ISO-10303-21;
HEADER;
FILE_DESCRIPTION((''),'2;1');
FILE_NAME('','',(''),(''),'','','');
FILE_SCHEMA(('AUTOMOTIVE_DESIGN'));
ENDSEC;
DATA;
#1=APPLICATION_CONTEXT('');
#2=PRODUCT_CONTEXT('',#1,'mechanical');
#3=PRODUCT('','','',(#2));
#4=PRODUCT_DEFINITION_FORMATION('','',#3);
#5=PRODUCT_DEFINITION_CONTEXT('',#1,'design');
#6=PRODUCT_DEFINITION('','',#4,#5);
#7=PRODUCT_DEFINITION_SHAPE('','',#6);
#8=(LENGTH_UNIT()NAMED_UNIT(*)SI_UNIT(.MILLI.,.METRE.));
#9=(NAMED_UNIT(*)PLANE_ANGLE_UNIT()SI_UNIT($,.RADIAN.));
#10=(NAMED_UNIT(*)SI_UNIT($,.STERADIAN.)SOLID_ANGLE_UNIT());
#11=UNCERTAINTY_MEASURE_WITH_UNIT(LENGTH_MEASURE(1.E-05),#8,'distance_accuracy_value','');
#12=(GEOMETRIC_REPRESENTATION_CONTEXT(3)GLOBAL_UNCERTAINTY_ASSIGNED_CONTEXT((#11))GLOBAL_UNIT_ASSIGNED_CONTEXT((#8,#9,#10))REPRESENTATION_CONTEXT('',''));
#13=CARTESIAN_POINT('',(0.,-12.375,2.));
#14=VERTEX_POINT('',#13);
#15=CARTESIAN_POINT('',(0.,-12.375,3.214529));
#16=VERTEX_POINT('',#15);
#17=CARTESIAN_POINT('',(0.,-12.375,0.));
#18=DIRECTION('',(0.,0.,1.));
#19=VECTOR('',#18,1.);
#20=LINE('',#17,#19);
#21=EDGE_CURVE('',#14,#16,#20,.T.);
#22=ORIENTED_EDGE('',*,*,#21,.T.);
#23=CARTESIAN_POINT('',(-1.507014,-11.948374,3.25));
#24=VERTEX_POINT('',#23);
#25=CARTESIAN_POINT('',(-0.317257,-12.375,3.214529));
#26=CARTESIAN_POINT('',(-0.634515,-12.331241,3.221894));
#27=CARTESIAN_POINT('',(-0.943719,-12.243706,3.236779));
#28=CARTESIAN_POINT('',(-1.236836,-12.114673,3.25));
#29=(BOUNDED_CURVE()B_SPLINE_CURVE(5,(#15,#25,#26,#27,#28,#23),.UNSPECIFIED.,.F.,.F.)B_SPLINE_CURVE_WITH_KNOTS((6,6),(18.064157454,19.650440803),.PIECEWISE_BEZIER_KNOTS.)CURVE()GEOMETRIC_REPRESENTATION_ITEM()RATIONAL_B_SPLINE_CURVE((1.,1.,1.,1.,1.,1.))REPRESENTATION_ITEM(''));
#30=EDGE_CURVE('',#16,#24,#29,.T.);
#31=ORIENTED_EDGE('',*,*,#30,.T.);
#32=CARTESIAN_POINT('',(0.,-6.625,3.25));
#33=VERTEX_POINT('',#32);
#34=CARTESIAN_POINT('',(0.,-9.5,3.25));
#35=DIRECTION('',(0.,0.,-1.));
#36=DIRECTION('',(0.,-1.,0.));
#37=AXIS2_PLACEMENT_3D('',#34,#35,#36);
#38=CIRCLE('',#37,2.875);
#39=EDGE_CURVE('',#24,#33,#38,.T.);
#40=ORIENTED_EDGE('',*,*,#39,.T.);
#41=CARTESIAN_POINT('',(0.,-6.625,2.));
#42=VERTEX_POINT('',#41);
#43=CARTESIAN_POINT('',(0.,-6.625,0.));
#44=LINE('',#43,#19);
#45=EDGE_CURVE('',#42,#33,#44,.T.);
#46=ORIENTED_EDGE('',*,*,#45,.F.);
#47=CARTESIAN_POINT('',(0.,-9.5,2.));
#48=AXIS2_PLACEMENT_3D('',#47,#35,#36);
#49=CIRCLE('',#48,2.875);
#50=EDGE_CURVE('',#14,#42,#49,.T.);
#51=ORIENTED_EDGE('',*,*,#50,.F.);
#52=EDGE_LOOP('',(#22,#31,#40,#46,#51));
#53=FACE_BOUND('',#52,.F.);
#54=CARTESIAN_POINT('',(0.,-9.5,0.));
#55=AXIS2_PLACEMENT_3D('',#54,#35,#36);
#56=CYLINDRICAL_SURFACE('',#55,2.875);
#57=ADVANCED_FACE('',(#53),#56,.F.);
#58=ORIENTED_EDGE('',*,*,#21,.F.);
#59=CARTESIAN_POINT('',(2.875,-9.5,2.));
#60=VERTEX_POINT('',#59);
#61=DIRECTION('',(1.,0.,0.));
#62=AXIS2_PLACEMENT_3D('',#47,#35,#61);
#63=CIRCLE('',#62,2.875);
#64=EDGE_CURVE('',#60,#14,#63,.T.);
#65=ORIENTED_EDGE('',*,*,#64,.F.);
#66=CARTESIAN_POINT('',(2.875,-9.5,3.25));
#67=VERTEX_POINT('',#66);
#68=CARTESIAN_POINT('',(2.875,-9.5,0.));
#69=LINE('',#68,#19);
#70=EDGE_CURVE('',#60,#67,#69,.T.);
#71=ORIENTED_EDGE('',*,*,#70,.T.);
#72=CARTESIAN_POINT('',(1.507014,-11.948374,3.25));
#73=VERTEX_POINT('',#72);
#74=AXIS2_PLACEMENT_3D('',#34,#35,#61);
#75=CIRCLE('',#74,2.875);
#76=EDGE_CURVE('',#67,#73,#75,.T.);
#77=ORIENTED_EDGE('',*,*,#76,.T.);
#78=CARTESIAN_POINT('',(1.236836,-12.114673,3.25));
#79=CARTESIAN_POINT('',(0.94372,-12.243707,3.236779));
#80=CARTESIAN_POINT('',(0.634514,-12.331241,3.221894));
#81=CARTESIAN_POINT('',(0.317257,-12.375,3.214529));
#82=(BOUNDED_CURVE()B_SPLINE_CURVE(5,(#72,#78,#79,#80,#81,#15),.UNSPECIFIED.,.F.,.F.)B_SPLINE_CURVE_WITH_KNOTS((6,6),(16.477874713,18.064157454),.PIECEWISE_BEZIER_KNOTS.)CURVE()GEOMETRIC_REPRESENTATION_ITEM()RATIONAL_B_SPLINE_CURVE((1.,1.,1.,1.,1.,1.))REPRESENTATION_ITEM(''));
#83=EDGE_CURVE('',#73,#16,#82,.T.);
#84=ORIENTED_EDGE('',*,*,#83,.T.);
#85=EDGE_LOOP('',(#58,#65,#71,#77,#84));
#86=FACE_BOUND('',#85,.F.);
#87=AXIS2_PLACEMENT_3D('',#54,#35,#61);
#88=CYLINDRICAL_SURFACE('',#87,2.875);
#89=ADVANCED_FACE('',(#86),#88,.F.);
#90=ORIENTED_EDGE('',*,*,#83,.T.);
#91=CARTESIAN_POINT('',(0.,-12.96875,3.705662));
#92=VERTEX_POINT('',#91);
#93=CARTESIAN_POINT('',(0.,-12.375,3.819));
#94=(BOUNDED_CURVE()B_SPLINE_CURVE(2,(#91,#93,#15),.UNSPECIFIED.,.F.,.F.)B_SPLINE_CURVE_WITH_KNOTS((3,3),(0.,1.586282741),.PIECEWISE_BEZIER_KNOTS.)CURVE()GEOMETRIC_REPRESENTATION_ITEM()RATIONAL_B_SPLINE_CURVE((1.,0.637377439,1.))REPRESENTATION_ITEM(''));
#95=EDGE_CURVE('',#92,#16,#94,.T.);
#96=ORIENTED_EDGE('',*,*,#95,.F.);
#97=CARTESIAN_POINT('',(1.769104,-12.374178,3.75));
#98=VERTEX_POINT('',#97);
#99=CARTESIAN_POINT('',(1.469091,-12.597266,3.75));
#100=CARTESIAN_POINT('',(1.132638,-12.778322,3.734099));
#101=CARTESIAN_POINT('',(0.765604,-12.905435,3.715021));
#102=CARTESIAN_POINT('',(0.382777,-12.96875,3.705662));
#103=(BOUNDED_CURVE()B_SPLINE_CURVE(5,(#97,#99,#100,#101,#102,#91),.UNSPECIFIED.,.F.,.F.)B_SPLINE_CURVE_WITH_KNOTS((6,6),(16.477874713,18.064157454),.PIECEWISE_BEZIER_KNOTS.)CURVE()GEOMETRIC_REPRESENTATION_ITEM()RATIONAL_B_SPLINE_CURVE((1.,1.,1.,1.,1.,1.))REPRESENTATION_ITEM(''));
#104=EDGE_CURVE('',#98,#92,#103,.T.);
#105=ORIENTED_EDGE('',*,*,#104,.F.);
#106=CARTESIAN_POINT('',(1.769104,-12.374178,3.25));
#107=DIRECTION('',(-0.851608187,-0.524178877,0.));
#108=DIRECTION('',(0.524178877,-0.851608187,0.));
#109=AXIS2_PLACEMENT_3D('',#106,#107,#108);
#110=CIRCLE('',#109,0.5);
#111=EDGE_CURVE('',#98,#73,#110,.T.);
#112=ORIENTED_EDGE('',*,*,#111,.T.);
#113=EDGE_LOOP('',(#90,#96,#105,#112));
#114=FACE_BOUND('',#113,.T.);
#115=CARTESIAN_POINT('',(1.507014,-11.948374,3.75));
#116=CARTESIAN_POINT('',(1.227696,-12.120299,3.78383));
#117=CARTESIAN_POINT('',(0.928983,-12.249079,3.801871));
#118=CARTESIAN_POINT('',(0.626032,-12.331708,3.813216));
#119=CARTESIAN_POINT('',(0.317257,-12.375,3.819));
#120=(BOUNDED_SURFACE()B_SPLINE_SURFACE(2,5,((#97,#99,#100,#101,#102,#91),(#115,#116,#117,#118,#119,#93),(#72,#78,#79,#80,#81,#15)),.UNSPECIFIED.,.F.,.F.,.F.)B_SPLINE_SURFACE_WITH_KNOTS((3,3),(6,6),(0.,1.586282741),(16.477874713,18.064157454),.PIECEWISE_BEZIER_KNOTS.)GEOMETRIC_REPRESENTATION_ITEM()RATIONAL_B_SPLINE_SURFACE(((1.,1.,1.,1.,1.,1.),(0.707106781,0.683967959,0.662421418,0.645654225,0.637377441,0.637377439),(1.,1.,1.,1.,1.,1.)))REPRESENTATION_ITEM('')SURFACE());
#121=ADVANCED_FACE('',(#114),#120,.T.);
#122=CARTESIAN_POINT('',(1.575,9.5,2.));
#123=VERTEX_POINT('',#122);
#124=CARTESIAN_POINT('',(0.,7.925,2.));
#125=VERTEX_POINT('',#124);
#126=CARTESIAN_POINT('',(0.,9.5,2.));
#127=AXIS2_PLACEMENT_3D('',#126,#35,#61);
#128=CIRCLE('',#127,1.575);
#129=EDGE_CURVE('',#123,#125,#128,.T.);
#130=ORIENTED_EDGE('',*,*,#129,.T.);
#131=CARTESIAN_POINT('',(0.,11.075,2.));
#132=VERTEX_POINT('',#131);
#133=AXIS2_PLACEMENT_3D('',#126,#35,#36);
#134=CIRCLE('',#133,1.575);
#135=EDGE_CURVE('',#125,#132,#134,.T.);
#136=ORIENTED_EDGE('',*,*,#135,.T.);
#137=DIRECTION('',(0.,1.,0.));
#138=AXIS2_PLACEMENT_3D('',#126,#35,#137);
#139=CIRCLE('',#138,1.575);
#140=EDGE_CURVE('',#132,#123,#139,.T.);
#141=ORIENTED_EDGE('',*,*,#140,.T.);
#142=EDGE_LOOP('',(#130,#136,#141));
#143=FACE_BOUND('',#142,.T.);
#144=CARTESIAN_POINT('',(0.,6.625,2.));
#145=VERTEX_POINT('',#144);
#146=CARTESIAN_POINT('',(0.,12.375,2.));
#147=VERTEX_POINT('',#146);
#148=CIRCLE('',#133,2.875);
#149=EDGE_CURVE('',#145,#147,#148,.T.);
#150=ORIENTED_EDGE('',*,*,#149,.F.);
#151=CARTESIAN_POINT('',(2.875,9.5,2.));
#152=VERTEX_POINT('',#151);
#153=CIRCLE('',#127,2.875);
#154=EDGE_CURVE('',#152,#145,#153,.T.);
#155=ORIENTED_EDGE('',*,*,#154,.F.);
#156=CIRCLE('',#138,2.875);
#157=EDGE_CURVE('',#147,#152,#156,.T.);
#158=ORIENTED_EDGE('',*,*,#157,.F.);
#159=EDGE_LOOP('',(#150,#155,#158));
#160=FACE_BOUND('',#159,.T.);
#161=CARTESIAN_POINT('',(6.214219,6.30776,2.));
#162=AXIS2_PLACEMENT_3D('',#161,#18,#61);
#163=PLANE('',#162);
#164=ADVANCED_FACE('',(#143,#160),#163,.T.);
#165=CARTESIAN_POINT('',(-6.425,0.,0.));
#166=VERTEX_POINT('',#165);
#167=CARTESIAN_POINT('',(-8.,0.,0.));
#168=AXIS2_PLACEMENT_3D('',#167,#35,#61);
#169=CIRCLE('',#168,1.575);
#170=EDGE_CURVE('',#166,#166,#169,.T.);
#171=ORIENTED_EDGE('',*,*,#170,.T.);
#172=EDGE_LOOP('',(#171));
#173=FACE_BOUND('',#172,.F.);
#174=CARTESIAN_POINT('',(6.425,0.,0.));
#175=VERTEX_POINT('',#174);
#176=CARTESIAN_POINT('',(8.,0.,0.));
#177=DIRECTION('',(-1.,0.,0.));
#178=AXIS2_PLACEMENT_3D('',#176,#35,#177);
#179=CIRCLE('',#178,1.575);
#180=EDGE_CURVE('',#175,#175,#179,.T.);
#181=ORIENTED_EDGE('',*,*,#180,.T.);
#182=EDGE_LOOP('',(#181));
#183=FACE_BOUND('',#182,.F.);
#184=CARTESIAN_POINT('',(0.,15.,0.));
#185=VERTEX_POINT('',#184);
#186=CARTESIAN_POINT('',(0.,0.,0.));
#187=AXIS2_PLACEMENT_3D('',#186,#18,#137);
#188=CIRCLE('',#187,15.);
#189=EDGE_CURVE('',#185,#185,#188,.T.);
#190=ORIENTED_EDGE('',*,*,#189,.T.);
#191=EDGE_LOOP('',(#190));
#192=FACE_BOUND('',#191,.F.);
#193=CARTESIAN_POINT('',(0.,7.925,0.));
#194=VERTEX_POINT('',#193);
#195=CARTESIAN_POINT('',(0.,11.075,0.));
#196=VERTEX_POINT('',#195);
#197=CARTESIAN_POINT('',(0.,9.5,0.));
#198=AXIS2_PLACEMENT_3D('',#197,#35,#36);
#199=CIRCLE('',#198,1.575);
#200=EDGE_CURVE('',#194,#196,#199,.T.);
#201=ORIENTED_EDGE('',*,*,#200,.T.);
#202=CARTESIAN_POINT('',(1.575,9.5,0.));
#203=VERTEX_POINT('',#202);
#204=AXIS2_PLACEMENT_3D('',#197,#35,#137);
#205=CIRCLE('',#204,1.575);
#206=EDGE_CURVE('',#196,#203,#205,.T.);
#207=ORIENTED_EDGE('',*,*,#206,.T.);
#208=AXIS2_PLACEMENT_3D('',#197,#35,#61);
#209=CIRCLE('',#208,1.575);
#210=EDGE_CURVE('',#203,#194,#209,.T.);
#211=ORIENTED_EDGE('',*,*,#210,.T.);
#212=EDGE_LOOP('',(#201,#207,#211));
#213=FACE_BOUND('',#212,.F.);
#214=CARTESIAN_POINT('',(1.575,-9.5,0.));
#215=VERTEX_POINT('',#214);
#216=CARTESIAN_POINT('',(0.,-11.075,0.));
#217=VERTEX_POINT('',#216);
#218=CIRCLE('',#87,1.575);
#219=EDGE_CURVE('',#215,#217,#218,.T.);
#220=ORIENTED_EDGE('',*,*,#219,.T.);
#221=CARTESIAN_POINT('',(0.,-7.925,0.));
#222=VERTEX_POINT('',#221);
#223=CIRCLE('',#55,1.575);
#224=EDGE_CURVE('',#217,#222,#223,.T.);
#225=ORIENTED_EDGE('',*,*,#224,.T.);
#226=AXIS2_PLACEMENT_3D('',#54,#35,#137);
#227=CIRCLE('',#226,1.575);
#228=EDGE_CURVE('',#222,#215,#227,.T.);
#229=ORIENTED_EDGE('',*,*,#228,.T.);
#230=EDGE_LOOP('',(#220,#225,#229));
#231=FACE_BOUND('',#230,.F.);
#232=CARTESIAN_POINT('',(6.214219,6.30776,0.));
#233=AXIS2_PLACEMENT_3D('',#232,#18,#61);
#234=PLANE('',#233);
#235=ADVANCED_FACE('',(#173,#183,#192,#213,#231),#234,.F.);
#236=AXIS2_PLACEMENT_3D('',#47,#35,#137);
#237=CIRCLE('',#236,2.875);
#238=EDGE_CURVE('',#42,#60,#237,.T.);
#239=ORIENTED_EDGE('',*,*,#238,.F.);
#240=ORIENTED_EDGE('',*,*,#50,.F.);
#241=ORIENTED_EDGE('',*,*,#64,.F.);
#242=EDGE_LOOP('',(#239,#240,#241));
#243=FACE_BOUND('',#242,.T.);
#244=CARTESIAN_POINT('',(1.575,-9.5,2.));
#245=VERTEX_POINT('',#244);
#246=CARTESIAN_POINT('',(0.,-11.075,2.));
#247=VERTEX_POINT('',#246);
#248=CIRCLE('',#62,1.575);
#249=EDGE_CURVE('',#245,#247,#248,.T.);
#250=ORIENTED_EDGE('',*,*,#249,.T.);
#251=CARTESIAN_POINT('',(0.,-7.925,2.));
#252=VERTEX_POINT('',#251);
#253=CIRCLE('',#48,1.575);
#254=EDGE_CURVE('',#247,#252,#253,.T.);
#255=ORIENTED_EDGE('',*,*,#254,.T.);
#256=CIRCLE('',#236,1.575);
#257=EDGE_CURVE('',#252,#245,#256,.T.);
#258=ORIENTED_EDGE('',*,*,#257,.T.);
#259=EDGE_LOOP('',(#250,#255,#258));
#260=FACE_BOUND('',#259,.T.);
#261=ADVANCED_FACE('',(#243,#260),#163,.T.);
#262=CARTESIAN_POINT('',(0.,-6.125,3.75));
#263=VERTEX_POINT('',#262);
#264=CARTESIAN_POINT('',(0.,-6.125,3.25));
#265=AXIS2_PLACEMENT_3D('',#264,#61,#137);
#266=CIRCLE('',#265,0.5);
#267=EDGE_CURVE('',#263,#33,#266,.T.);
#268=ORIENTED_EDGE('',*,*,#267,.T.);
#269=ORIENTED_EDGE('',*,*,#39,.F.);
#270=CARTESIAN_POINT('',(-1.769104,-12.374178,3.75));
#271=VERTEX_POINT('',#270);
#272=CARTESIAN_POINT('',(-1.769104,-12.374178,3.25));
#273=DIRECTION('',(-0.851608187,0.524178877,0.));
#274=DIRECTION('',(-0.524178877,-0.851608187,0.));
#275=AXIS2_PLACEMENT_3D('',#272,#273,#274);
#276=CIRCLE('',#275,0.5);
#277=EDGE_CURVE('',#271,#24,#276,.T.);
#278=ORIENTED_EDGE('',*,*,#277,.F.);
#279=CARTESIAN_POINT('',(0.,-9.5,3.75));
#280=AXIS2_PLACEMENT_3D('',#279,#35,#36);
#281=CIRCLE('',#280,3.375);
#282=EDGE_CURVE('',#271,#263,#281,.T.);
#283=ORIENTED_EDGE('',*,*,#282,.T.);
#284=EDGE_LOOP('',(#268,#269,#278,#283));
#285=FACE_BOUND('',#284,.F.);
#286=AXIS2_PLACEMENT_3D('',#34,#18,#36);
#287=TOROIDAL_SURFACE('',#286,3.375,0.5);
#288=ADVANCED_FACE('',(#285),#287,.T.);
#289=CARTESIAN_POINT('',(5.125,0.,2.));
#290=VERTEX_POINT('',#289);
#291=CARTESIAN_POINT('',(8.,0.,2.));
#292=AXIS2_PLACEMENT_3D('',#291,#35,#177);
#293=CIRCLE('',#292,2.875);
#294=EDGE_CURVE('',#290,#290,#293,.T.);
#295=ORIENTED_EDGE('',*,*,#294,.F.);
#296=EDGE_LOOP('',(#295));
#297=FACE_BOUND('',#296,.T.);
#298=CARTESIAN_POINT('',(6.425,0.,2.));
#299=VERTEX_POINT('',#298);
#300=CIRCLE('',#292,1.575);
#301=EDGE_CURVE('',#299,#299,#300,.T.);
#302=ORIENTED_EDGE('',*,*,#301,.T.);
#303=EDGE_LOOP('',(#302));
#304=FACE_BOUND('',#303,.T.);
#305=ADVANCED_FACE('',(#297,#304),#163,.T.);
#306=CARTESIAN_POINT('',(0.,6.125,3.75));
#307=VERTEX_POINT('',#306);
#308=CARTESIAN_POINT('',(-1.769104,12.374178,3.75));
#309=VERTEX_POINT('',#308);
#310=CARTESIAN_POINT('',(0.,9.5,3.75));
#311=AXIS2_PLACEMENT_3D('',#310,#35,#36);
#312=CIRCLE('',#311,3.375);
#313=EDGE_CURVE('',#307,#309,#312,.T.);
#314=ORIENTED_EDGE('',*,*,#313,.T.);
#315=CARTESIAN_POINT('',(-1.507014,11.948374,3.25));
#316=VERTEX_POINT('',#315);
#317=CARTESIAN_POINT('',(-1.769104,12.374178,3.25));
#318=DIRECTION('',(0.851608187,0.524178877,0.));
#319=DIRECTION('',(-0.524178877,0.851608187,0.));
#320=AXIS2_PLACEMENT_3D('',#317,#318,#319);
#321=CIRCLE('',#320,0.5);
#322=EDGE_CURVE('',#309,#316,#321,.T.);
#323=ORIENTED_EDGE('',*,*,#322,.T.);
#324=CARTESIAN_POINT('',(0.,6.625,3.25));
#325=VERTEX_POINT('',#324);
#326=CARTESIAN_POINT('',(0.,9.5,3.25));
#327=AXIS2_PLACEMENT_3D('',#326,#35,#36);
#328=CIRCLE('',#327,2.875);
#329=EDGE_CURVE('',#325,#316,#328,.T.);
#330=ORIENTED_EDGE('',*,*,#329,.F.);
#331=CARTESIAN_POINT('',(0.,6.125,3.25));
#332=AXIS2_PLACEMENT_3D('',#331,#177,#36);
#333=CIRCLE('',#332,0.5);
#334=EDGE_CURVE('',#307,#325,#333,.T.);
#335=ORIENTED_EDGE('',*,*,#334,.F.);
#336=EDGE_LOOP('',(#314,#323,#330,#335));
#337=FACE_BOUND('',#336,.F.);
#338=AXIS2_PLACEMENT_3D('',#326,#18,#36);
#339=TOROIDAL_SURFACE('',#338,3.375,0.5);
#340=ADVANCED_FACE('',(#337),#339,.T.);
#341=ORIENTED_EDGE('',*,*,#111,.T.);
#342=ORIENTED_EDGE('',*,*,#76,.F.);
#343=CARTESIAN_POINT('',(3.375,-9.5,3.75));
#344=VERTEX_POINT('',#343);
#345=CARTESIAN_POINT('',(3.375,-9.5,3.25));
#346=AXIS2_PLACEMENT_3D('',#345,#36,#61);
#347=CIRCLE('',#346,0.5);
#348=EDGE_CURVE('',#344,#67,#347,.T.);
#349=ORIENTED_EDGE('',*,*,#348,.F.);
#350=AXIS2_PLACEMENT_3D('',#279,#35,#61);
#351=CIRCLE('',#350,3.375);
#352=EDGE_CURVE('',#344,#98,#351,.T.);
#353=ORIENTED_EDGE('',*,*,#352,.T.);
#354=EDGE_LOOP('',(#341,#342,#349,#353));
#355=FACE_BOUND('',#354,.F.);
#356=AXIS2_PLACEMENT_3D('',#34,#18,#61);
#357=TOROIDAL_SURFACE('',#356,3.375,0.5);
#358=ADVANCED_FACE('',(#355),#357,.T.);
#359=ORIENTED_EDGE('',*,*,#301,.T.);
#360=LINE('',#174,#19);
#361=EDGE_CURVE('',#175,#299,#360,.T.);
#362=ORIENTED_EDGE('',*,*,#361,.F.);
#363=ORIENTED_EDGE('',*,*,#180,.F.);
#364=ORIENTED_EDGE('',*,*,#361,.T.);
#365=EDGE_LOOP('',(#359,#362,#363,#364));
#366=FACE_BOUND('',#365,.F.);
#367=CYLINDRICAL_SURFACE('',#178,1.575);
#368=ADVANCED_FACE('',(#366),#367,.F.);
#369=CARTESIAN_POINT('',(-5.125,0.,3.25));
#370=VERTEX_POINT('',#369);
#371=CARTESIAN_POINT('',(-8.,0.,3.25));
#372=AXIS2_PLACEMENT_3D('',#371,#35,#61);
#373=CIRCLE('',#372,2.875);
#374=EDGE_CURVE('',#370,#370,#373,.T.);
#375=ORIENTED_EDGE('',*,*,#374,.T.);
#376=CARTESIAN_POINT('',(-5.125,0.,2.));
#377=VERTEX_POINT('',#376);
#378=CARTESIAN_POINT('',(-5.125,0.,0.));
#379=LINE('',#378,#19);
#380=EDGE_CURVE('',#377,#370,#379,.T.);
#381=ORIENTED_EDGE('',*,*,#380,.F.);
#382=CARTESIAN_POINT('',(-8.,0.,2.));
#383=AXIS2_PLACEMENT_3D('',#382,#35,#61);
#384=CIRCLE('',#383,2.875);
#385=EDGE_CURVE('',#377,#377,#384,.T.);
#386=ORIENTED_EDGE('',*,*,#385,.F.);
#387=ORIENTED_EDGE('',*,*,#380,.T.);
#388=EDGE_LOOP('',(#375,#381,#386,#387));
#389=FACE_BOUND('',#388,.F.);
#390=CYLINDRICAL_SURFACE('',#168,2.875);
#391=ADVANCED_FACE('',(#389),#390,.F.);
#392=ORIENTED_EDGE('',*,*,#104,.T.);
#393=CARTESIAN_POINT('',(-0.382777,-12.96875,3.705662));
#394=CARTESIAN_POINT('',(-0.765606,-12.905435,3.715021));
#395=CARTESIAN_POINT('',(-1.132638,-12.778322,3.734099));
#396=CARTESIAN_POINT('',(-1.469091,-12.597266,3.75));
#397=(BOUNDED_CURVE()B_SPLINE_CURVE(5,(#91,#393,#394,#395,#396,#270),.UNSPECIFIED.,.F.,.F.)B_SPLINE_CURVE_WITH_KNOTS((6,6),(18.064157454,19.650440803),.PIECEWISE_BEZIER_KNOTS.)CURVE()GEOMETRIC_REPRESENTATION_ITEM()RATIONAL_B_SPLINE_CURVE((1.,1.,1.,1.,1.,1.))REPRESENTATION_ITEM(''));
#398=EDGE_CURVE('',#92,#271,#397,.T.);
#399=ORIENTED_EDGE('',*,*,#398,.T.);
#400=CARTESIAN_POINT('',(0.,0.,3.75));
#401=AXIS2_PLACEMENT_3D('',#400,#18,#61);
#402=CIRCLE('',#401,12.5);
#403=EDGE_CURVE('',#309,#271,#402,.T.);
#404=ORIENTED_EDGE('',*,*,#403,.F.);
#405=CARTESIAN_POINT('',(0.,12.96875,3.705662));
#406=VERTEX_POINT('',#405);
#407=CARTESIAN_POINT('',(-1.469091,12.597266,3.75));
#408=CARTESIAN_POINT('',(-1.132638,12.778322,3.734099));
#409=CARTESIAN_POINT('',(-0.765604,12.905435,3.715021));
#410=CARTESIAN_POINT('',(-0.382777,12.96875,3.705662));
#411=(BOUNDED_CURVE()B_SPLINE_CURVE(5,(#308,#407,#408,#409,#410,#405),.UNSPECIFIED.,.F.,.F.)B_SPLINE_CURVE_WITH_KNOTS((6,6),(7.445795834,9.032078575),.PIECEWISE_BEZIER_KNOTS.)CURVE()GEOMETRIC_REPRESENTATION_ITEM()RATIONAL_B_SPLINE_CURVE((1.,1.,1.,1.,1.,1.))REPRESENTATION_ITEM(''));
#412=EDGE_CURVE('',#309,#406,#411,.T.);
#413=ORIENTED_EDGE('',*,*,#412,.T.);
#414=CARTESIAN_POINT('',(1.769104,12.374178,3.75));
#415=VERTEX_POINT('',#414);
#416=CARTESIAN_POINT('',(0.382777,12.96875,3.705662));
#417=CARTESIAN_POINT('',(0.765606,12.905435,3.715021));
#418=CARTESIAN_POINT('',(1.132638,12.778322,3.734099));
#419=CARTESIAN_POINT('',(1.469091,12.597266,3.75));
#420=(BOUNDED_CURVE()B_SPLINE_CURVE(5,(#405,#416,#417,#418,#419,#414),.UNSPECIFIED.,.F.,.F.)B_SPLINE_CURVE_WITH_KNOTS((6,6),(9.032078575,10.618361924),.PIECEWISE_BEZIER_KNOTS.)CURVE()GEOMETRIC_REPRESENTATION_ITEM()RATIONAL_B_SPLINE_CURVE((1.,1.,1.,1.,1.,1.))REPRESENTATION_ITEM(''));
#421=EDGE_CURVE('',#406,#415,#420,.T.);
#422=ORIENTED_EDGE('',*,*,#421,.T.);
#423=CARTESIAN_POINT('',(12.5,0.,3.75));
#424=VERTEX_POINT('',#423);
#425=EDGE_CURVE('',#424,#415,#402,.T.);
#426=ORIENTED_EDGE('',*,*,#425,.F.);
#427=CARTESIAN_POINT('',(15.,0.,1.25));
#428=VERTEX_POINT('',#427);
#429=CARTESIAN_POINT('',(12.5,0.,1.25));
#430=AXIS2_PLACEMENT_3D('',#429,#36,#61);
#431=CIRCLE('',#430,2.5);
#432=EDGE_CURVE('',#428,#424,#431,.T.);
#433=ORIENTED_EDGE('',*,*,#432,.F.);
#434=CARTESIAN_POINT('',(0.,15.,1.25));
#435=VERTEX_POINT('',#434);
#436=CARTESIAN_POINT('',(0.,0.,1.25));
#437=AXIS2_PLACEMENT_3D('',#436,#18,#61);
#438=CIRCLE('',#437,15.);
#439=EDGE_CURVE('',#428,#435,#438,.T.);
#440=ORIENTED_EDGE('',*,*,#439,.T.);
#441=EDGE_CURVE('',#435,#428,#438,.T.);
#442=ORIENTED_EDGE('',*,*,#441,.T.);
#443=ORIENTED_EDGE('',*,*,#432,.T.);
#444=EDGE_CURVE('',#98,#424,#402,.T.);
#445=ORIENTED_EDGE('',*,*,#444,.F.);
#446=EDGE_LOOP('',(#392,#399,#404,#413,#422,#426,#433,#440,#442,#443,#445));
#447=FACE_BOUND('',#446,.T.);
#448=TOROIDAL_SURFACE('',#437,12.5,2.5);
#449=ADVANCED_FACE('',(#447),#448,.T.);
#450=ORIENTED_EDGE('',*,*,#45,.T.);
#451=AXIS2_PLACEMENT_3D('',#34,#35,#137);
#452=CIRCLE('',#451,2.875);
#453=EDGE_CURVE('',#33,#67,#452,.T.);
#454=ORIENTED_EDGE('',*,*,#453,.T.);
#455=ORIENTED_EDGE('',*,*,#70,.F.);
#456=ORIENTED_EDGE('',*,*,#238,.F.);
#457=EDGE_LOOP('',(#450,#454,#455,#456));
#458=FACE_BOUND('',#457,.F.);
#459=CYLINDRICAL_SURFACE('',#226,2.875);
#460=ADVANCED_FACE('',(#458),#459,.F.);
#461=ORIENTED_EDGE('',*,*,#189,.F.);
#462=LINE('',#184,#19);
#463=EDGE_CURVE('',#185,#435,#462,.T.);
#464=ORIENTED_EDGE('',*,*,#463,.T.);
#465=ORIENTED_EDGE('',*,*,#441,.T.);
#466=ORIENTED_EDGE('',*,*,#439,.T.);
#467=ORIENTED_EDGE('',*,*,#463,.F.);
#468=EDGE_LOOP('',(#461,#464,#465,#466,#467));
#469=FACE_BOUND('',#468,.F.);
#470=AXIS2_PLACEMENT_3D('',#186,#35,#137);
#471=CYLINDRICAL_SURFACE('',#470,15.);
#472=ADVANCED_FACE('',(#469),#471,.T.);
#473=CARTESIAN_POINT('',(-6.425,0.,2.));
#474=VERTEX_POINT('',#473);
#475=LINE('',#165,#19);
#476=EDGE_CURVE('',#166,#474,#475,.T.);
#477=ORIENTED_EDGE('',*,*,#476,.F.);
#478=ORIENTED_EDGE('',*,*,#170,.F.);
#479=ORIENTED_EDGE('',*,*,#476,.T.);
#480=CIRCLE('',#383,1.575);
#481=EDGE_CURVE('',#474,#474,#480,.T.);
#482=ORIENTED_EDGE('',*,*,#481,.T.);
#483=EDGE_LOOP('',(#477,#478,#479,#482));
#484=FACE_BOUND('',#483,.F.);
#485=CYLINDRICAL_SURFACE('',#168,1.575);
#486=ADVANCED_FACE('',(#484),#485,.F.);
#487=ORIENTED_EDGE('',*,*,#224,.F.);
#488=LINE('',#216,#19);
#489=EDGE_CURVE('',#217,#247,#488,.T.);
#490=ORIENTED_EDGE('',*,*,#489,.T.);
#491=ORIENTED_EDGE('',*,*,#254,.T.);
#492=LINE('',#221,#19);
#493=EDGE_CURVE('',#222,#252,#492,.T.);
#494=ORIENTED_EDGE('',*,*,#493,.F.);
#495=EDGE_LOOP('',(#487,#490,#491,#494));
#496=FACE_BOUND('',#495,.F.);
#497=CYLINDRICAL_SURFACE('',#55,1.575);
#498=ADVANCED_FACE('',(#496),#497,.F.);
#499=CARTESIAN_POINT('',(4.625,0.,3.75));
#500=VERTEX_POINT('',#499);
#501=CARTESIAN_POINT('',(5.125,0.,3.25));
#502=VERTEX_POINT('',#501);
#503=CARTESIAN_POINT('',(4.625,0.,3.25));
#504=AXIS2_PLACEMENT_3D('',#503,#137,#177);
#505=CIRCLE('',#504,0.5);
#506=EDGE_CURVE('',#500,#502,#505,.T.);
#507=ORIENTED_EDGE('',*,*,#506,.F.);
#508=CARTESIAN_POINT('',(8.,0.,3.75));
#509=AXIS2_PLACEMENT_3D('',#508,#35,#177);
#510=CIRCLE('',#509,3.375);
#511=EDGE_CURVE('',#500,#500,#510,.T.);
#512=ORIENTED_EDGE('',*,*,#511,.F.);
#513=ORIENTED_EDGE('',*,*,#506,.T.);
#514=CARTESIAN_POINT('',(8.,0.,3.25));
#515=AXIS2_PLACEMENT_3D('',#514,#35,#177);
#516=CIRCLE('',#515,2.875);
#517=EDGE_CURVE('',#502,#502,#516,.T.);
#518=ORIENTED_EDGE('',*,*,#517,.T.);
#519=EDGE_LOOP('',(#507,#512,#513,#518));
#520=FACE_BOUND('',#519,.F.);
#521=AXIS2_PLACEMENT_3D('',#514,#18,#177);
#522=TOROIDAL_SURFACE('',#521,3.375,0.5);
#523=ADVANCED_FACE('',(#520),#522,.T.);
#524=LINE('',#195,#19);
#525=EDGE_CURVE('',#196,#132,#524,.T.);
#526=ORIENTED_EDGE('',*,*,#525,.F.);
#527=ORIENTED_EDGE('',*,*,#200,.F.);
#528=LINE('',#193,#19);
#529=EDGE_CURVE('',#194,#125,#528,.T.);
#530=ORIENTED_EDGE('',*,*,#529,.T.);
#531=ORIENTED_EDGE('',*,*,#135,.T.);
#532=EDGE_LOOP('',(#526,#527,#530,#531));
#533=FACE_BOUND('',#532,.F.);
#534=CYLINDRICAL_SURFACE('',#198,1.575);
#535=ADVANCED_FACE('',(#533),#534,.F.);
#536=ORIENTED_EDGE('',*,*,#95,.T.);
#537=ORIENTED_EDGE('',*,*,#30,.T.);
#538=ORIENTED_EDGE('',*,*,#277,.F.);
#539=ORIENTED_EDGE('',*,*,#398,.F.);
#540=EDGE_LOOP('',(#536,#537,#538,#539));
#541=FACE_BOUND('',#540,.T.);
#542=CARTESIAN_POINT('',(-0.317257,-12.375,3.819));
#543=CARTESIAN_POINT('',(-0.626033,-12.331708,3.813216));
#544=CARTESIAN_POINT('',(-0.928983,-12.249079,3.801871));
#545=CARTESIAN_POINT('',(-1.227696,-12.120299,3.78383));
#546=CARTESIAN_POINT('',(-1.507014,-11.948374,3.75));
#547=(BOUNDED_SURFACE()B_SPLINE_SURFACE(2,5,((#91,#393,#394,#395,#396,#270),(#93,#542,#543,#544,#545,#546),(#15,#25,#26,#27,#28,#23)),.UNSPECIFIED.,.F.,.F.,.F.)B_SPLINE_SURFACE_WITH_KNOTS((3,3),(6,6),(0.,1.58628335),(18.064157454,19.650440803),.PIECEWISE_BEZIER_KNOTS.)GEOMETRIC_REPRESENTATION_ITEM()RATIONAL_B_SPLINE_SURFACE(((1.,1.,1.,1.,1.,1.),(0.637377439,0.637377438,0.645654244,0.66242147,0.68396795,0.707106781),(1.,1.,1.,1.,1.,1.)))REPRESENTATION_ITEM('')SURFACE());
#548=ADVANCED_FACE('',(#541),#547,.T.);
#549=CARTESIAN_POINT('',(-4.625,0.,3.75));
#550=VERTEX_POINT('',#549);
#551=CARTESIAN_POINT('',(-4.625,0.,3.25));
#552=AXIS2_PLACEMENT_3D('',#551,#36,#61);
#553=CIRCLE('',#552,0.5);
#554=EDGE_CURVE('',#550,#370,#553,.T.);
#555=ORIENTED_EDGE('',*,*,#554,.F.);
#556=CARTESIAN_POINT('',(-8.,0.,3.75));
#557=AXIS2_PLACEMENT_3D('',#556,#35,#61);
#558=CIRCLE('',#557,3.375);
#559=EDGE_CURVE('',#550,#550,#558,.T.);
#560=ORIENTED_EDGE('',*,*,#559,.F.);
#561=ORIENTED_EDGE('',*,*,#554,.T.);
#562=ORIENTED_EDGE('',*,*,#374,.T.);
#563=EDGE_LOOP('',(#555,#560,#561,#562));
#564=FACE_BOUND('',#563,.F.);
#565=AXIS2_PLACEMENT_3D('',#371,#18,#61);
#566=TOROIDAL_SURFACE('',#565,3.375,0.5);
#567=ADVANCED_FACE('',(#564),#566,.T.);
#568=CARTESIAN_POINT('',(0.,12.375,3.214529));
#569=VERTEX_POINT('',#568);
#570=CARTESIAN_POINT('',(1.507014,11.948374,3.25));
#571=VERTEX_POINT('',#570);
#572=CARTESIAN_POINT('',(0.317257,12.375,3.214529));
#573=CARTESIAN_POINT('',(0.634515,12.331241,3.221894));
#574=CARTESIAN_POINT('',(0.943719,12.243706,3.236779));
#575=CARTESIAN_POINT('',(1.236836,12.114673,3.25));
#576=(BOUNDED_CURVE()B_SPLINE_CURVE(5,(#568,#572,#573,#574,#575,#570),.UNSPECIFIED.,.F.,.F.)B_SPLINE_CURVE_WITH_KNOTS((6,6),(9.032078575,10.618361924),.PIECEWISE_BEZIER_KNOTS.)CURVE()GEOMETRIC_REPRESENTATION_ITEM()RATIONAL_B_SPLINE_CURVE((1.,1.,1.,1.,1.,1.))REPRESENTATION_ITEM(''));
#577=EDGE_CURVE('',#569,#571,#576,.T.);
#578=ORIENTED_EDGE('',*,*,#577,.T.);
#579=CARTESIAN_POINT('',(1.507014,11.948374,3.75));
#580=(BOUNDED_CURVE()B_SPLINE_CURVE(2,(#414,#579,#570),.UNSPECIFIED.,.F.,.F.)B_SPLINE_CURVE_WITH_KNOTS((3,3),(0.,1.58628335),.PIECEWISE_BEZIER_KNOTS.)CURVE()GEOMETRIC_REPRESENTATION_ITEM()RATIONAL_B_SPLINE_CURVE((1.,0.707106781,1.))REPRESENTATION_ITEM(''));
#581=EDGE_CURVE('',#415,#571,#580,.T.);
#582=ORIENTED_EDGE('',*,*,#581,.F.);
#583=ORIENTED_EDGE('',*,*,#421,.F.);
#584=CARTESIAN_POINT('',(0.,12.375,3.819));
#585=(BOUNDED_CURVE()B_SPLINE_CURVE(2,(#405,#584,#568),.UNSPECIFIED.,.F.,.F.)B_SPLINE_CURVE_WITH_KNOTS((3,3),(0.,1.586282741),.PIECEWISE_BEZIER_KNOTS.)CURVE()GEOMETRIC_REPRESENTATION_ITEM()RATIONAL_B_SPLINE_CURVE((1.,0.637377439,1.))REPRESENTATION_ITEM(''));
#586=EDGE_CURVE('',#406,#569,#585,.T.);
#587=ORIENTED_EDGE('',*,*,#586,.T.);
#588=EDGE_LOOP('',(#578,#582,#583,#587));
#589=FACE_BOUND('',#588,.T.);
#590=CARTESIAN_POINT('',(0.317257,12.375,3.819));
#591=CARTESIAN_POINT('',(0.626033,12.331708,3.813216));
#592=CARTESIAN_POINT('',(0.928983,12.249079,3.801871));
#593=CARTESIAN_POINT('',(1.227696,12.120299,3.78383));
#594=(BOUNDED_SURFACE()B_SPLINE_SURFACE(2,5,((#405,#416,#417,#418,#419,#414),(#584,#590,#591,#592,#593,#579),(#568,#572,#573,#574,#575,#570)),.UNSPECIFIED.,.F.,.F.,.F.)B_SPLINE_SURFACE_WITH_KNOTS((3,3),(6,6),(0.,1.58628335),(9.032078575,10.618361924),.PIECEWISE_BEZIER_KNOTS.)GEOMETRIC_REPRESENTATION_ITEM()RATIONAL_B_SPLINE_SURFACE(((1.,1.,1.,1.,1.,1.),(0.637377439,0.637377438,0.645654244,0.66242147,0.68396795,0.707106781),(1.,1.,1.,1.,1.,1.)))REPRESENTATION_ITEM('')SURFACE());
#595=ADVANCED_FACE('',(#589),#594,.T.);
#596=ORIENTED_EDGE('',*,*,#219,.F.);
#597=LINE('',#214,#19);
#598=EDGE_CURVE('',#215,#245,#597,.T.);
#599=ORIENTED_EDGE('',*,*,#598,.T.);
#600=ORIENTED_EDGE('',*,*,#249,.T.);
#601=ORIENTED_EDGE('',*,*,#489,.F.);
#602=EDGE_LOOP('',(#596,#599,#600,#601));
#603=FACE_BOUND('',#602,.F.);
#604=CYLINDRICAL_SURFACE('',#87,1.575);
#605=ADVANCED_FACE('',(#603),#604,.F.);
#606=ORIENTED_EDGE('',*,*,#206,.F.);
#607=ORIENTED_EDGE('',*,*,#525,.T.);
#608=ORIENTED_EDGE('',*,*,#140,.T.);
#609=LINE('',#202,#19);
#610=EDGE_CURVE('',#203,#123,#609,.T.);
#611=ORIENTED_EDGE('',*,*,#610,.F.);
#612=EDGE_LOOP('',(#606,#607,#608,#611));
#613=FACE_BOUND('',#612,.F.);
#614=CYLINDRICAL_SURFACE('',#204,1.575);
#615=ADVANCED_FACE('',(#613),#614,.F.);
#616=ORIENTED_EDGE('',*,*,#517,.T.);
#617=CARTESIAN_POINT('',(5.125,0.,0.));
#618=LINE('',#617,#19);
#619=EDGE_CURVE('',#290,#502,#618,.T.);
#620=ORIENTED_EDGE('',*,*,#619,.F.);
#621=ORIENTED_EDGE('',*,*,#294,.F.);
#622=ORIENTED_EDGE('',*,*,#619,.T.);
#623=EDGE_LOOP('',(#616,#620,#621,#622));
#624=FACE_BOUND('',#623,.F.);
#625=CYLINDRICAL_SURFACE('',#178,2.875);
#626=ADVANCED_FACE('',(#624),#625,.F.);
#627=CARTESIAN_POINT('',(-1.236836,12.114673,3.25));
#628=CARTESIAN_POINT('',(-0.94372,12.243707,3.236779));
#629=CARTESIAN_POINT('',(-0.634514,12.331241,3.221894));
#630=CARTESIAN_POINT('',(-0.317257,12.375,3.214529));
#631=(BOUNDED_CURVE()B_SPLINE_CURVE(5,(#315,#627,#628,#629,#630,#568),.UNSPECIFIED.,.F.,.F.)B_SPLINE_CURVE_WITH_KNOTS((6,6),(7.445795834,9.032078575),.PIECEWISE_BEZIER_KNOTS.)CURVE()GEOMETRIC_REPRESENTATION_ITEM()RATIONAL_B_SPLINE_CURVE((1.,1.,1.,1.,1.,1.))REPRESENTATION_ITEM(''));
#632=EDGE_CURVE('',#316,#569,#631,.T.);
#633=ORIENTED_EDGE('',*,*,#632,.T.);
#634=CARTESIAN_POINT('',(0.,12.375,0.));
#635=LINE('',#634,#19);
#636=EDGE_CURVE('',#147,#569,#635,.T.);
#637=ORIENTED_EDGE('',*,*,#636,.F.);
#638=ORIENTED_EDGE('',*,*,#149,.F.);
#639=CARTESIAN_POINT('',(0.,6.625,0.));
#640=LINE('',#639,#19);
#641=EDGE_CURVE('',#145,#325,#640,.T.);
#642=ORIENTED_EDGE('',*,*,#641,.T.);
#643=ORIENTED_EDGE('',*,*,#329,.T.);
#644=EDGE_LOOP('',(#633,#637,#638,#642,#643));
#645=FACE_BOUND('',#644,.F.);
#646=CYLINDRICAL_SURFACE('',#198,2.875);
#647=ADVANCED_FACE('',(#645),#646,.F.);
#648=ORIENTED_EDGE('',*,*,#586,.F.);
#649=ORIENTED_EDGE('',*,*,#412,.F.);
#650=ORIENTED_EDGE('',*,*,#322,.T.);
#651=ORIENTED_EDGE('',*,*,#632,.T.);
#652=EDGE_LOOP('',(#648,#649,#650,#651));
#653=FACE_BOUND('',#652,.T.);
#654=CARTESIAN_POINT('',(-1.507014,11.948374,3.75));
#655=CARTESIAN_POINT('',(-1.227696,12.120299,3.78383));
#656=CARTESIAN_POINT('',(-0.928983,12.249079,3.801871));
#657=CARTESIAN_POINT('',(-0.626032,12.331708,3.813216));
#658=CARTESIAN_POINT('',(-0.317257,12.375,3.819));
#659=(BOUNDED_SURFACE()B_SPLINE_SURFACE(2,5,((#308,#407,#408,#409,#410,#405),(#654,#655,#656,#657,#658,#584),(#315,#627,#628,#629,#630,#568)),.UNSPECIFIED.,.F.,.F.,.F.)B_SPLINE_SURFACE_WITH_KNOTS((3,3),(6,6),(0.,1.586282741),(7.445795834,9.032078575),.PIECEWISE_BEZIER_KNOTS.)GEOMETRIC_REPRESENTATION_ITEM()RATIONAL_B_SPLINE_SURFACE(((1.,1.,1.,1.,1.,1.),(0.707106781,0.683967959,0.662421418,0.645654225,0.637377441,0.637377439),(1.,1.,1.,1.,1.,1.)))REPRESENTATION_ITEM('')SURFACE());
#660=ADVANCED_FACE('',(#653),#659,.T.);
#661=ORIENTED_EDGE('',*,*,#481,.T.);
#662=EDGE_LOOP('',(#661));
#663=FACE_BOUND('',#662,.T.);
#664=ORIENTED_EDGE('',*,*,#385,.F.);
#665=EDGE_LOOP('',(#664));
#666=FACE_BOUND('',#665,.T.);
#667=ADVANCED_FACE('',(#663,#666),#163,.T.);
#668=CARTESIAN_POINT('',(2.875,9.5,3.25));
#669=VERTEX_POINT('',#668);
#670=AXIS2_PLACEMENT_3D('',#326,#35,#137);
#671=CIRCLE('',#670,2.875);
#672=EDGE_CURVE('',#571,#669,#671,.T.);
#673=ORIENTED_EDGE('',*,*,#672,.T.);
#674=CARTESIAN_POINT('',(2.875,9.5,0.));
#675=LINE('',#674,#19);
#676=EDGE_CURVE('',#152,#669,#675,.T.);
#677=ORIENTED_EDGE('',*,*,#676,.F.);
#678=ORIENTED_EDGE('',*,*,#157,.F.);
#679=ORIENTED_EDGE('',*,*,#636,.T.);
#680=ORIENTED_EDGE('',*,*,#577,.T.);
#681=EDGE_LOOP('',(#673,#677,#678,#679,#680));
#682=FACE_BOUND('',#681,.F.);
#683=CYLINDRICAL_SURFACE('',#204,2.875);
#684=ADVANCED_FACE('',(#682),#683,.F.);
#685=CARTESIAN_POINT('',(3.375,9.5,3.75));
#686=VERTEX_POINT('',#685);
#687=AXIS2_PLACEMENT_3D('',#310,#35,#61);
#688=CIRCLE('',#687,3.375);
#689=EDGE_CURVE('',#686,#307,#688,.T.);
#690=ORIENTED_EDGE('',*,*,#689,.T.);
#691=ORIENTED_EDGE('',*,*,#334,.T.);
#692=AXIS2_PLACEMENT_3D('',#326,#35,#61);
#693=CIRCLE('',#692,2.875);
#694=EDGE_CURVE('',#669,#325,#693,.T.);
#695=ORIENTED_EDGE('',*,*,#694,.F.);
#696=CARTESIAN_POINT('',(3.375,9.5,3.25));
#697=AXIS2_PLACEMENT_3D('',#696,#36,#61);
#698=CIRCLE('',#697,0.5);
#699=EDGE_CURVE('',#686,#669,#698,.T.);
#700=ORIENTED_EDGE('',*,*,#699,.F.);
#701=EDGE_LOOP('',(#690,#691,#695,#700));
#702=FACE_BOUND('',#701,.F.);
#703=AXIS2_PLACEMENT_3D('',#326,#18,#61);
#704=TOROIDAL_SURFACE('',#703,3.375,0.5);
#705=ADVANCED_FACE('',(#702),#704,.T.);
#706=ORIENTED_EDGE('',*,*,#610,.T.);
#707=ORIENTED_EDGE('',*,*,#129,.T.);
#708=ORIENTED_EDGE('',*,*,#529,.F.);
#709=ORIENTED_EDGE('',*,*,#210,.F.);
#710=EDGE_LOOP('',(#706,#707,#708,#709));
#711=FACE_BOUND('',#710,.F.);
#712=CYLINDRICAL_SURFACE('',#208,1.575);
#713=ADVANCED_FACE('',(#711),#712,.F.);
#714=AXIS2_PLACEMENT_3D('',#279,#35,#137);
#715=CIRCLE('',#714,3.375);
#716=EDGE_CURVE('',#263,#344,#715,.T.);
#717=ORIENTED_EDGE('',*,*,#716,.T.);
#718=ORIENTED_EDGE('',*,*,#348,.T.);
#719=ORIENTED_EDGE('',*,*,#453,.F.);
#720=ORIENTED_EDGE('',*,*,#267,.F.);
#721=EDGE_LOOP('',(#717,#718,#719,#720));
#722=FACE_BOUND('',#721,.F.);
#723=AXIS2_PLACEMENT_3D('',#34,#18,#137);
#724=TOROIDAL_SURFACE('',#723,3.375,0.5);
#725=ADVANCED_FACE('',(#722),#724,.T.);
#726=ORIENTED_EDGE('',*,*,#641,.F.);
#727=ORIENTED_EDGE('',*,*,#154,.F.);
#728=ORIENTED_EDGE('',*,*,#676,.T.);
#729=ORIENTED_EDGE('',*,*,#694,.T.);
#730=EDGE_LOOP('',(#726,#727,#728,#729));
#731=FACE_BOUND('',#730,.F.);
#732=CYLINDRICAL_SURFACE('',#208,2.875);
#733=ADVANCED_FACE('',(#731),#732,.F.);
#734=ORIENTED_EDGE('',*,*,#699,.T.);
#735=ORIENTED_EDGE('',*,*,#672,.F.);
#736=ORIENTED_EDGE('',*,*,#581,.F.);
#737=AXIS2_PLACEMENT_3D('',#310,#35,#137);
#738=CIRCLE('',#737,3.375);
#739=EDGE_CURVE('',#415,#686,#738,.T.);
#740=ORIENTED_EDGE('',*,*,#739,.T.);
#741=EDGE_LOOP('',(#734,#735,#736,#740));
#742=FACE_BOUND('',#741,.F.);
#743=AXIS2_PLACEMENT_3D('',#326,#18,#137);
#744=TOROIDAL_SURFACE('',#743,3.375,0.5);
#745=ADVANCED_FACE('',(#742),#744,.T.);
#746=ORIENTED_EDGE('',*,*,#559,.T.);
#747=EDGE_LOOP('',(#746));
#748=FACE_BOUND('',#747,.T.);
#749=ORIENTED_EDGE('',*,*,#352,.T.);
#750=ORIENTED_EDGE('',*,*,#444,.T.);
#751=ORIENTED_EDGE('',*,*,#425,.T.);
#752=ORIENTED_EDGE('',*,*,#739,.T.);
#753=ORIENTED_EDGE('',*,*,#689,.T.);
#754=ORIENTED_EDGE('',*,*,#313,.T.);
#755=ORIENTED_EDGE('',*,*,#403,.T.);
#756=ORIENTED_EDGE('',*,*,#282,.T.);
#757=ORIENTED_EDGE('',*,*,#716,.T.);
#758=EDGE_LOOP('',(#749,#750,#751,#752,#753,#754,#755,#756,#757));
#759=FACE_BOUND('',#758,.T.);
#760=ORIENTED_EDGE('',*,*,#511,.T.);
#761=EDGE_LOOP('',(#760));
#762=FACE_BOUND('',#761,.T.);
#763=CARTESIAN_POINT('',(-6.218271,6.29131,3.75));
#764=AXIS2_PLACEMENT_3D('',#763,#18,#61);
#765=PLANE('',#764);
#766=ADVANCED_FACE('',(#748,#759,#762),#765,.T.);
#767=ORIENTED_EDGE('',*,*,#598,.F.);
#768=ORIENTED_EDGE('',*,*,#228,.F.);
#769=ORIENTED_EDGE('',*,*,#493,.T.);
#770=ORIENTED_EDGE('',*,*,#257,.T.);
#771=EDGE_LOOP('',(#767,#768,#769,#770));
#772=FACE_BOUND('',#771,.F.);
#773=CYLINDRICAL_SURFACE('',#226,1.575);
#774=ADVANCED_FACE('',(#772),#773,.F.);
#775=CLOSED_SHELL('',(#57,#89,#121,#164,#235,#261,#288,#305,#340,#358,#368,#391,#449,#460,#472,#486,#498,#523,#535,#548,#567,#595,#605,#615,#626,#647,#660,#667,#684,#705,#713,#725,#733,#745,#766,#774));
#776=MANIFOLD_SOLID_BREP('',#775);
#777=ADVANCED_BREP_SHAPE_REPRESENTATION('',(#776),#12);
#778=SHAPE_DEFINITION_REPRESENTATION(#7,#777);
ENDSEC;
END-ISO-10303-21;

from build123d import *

# Parameters (mm, degrees)
F1_DEPTH = 2
F2_DEPTH = 3.75
F4_R     = 0.5


# Not quite as in the source:
# - a fillet or chamfer that OpenCascade refuses, or shapes differently, is made with other operations: its cross-section is extruded or revolved along the edge and cut away or added


with BuildPart() as f1:
    # F0 (on Top) → F1 (new body)
    with BuildSketch(Plane.XY):
        with BuildLine():
            Line((10.875, 0), (15, 0))
            ThreePointArc((15, 0), (10.6066017178, 10.6066017178), (0, 15))
            Line((0, 15), (0, 12.375))
            ThreePointArc((0, 12.375), (2.0329319959, 11.5329319959), (2.875, 9.5))
            ThreePointArc((2.875, 9.5), (2.0329319959, 7.4670680041), (0, 6.625))
            Line((0, 6.625), (0, 0))
            Line((0, 0), (5.125, 0))
            ThreePointArc((5.125, 0), (8, 2.875), (10.875, 0))
        make_face()
        with BuildLine():
            ThreePointArc((0, -15), (10.6066017178, -10.6066017178), (15, 0))
            Line((15, 0), (10.875, 0))
            ThreePointArc((10.875, 0), (8, -2.875), (5.125, 0))
            Line((5.125, 0), (0, 0))
            Line((0, 0), (0, -6.625))
            ThreePointArc((0, -6.625), (2.0329319959, -7.4670680041), (2.875, -9.5))
            ThreePointArc((2.875, -9.5), (2.0329319959, -11.5329319959), (0, -12.375))
            Line((0, -12.375), (0, -15))
        make_face()
        with BuildLine():
            Line((0, 12.375), (0, 15))
            ThreePointArc((0, 15), (-10.6066017178, 10.6066017178), (-15, 0))
            Line((-15, 0), (-10.875, 0))
            ThreePointArc((-10.875, 0), (-8, 2.875), (-5.125, 0))
            Line((-5.125, 0), (0, 0))
            Line((0, 0), (0, 6.625))
            ThreePointArc((0, 6.625), (-2.875, 9.5), (0, 12.375))
        make_face()
        with BuildLine():
            ThreePointArc((-15, 0), (-10.6066017178, -10.6066017178), (0, -15))
            Line((0, -15), (0, -12.375))
            ThreePointArc((0, -12.375), (-2.875, -9.5), (0, -6.625))
            Line((0, -6.625), (0, 0))
            Line((0, 0), (-5.125, 0))
            ThreePointArc((-5.125, 0), (-8, -2.875), (-10.875, 0))
            Line((-10.875, 0), (-15, 0))
        make_face()
        with BuildLine():
            ThreePointArc((-5.125, 0), (-8, 2.875), (-10.875, 0))
            Line((-10.875, 0), (-9.575, 0))
            ThreePointArc((-9.575, 0), (-8, 1.575), (-6.425, 0))
            Line((-6.425, 0), (-5.125, 0))
        make_face()
        with BuildLine():
            Line((-9.575, 0), (-10.875, 0))
            ThreePointArc((-10.875, 0), (-8, -2.875), (-5.125, 0))
            Line((-5.125, 0), (-6.425, 0))
            ThreePointArc((-6.425, 0), (-8, -1.575), (-9.575, 0))
        make_face()
        with BuildLine():
            ThreePointArc((0, -6.625), (-2.875, -9.5), (0, -12.375))
            Line((0, -12.375), (0, -11.075))
            ThreePointArc((0, -11.075), (-1.575, -9.5), (0, -7.925))
            Line((0, -7.925), (0, -6.625))
        make_face()
        with BuildLine():
            Line((0, -11.075), (0, -12.375))
            ThreePointArc((0, -12.375), (2.0329319959, -11.5329319959), (2.875, -9.5))
            ThreePointArc((2.875, -9.5), (2.0329319959, -7.4670680041), (0, -6.625))
            Line((0, -6.625), (0, -7.925))
            ThreePointArc((0, -7.925), (1.1136931804, -8.3863068196), (1.575, -9.5))
            ThreePointArc((1.575, -9.5), (1.1136931804, -10.6136931804), (0, -11.075))
        make_face()
        with BuildLine():
            ThreePointArc((5.125, 0), (8, -2.875), (10.875, 0))
            Line((10.875, 0), (9.575, 0))
            ThreePointArc((9.575, 0), (8, -1.575), (6.425, 0))
            Line((6.425, 0), (5.125, 0))
        make_face()
        with BuildLine():
            Line((9.575, 0), (10.875, 0))
            ThreePointArc((10.875, 0), (8, 2.875), (5.125, 0))
            Line((5.125, 0), (6.425, 0))
            ThreePointArc((6.425, 0), (8, 1.575), (9.575, 0))
        make_face()
        with BuildLine():
            ThreePointArc((2.875, 9.5), (2.0329319959, 11.5329319959), (0, 12.375))
            Line((0, 12.375), (0, 11.075))
            ThreePointArc((0, 11.075), (1.1136931804, 10.6136931804), (1.575, 9.5))
            ThreePointArc((1.575, 9.5), (1.1136931804, 8.3863068196), (0, 7.925))
            Line((0, 7.925), (0, 6.625))
            ThreePointArc((0, 6.625), (2.0329319959, 7.4670680041), (2.875, 9.5))
        make_face()
        with BuildLine():
            Line((0, 11.075), (0, 12.375))
            ThreePointArc((0, 12.375), (-2.875, 9.5), (0, 6.625))
            Line((0, 6.625), (0, 7.925))
            ThreePointArc((0, 7.925), (-1.575, 9.5), (0, 11.075))
        make_face()
    extrude(amount=F1_DEPTH)

    # F0 (on Top) → F2 (join)
    with BuildSketch(Plane.XY):
        with BuildLine():
            Line((0, 12.375), (0, 15))
            ThreePointArc((0, 15), (-10.6066017178, 10.6066017178), (-15, 0))
            Line((-15, 0), (-10.875, 0))
            ThreePointArc((-10.875, 0), (-8, 2.875), (-5.125, 0))
            Line((-5.125, 0), (0, 0))
            Line((0, 0), (0, 6.625))
            ThreePointArc((0, 6.625), (-2.875, 9.5), (0, 12.375))
        make_face()
        with BuildLine():
            ThreePointArc((-15, 0), (-10.6066017178, -10.6066017178), (0, -15))
            Line((0, -15), (0, -12.375))
            ThreePointArc((0, -12.375), (-2.875, -9.5), (0, -6.625))
            Line((0, -6.625), (0, 0))
            Line((0, 0), (-5.125, 0))
            ThreePointArc((-5.125, 0), (-8, -2.875), (-10.875, 0))
            Line((-10.875, 0), (-15, 0))
        make_face()
        with BuildLine():
            ThreePointArc((0, -15), (10.6066017178, -10.6066017178), (15, 0))
            Line((15, 0), (10.875, 0))
            ThreePointArc((10.875, 0), (8, -2.875), (5.125, 0))
            Line((5.125, 0), (0, 0))
            Line((0, 0), (0, -6.625))
            ThreePointArc((0, -6.625), (2.0329319959, -7.4670680041), (2.875, -9.5))
            ThreePointArc((2.875, -9.5), (2.0329319959, -11.5329319959), (0, -12.375))
            Line((0, -12.375), (0, -15))
        make_face()
        with BuildLine():
            Line((10.875, 0), (15, 0))
            ThreePointArc((15, 0), (10.6066017178, 10.6066017178), (0, 15))
            Line((0, 15), (0, 12.375))
            ThreePointArc((0, 12.375), (2.0329319959, 11.5329319959), (2.875, 9.5))
            ThreePointArc((2.875, 9.5), (2.0329319959, 7.4670680041), (0, 6.625))
            Line((0, 6.625), (0, 0))
            Line((0, 0), (5.125, 0))
            ThreePointArc((5.125, 0), (8, 2.875), (10.875, 0))
        make_face()
    extrude(amount=F2_DEPTH)

    # F3: fillet of radius 2.5 on 1 edges, made by hand

    # F3_s1 → F3_t2 (revolve, cut)
    with BuildSketch(Plane.XZ):
        with BuildLine():
            ThreePointArc((15, 1.25), (14.267766953, 3.017766953), (12.5, 3.75))
            Line((12.5, 3.75), (15, 3.75))
            Line((15, 3.75), (15, 1.25))
        make_face()
    revolve(axis=Axis((0, 0, 3.75), (0, 0, 1)), mode=Mode.SUBTRACT)

    # F4
    f4_edges = [f1.edges().sort_by_distance(p)[0] for p in [
        (0, 6.625, 3.75),
        (-10.875, 0, 3.75),
        (0, -12.375, 3.75),
        (10.875, 0, 3.75),
    ]]
    fillet(f4_edges, radius=F4_R)


solid = f1.part
